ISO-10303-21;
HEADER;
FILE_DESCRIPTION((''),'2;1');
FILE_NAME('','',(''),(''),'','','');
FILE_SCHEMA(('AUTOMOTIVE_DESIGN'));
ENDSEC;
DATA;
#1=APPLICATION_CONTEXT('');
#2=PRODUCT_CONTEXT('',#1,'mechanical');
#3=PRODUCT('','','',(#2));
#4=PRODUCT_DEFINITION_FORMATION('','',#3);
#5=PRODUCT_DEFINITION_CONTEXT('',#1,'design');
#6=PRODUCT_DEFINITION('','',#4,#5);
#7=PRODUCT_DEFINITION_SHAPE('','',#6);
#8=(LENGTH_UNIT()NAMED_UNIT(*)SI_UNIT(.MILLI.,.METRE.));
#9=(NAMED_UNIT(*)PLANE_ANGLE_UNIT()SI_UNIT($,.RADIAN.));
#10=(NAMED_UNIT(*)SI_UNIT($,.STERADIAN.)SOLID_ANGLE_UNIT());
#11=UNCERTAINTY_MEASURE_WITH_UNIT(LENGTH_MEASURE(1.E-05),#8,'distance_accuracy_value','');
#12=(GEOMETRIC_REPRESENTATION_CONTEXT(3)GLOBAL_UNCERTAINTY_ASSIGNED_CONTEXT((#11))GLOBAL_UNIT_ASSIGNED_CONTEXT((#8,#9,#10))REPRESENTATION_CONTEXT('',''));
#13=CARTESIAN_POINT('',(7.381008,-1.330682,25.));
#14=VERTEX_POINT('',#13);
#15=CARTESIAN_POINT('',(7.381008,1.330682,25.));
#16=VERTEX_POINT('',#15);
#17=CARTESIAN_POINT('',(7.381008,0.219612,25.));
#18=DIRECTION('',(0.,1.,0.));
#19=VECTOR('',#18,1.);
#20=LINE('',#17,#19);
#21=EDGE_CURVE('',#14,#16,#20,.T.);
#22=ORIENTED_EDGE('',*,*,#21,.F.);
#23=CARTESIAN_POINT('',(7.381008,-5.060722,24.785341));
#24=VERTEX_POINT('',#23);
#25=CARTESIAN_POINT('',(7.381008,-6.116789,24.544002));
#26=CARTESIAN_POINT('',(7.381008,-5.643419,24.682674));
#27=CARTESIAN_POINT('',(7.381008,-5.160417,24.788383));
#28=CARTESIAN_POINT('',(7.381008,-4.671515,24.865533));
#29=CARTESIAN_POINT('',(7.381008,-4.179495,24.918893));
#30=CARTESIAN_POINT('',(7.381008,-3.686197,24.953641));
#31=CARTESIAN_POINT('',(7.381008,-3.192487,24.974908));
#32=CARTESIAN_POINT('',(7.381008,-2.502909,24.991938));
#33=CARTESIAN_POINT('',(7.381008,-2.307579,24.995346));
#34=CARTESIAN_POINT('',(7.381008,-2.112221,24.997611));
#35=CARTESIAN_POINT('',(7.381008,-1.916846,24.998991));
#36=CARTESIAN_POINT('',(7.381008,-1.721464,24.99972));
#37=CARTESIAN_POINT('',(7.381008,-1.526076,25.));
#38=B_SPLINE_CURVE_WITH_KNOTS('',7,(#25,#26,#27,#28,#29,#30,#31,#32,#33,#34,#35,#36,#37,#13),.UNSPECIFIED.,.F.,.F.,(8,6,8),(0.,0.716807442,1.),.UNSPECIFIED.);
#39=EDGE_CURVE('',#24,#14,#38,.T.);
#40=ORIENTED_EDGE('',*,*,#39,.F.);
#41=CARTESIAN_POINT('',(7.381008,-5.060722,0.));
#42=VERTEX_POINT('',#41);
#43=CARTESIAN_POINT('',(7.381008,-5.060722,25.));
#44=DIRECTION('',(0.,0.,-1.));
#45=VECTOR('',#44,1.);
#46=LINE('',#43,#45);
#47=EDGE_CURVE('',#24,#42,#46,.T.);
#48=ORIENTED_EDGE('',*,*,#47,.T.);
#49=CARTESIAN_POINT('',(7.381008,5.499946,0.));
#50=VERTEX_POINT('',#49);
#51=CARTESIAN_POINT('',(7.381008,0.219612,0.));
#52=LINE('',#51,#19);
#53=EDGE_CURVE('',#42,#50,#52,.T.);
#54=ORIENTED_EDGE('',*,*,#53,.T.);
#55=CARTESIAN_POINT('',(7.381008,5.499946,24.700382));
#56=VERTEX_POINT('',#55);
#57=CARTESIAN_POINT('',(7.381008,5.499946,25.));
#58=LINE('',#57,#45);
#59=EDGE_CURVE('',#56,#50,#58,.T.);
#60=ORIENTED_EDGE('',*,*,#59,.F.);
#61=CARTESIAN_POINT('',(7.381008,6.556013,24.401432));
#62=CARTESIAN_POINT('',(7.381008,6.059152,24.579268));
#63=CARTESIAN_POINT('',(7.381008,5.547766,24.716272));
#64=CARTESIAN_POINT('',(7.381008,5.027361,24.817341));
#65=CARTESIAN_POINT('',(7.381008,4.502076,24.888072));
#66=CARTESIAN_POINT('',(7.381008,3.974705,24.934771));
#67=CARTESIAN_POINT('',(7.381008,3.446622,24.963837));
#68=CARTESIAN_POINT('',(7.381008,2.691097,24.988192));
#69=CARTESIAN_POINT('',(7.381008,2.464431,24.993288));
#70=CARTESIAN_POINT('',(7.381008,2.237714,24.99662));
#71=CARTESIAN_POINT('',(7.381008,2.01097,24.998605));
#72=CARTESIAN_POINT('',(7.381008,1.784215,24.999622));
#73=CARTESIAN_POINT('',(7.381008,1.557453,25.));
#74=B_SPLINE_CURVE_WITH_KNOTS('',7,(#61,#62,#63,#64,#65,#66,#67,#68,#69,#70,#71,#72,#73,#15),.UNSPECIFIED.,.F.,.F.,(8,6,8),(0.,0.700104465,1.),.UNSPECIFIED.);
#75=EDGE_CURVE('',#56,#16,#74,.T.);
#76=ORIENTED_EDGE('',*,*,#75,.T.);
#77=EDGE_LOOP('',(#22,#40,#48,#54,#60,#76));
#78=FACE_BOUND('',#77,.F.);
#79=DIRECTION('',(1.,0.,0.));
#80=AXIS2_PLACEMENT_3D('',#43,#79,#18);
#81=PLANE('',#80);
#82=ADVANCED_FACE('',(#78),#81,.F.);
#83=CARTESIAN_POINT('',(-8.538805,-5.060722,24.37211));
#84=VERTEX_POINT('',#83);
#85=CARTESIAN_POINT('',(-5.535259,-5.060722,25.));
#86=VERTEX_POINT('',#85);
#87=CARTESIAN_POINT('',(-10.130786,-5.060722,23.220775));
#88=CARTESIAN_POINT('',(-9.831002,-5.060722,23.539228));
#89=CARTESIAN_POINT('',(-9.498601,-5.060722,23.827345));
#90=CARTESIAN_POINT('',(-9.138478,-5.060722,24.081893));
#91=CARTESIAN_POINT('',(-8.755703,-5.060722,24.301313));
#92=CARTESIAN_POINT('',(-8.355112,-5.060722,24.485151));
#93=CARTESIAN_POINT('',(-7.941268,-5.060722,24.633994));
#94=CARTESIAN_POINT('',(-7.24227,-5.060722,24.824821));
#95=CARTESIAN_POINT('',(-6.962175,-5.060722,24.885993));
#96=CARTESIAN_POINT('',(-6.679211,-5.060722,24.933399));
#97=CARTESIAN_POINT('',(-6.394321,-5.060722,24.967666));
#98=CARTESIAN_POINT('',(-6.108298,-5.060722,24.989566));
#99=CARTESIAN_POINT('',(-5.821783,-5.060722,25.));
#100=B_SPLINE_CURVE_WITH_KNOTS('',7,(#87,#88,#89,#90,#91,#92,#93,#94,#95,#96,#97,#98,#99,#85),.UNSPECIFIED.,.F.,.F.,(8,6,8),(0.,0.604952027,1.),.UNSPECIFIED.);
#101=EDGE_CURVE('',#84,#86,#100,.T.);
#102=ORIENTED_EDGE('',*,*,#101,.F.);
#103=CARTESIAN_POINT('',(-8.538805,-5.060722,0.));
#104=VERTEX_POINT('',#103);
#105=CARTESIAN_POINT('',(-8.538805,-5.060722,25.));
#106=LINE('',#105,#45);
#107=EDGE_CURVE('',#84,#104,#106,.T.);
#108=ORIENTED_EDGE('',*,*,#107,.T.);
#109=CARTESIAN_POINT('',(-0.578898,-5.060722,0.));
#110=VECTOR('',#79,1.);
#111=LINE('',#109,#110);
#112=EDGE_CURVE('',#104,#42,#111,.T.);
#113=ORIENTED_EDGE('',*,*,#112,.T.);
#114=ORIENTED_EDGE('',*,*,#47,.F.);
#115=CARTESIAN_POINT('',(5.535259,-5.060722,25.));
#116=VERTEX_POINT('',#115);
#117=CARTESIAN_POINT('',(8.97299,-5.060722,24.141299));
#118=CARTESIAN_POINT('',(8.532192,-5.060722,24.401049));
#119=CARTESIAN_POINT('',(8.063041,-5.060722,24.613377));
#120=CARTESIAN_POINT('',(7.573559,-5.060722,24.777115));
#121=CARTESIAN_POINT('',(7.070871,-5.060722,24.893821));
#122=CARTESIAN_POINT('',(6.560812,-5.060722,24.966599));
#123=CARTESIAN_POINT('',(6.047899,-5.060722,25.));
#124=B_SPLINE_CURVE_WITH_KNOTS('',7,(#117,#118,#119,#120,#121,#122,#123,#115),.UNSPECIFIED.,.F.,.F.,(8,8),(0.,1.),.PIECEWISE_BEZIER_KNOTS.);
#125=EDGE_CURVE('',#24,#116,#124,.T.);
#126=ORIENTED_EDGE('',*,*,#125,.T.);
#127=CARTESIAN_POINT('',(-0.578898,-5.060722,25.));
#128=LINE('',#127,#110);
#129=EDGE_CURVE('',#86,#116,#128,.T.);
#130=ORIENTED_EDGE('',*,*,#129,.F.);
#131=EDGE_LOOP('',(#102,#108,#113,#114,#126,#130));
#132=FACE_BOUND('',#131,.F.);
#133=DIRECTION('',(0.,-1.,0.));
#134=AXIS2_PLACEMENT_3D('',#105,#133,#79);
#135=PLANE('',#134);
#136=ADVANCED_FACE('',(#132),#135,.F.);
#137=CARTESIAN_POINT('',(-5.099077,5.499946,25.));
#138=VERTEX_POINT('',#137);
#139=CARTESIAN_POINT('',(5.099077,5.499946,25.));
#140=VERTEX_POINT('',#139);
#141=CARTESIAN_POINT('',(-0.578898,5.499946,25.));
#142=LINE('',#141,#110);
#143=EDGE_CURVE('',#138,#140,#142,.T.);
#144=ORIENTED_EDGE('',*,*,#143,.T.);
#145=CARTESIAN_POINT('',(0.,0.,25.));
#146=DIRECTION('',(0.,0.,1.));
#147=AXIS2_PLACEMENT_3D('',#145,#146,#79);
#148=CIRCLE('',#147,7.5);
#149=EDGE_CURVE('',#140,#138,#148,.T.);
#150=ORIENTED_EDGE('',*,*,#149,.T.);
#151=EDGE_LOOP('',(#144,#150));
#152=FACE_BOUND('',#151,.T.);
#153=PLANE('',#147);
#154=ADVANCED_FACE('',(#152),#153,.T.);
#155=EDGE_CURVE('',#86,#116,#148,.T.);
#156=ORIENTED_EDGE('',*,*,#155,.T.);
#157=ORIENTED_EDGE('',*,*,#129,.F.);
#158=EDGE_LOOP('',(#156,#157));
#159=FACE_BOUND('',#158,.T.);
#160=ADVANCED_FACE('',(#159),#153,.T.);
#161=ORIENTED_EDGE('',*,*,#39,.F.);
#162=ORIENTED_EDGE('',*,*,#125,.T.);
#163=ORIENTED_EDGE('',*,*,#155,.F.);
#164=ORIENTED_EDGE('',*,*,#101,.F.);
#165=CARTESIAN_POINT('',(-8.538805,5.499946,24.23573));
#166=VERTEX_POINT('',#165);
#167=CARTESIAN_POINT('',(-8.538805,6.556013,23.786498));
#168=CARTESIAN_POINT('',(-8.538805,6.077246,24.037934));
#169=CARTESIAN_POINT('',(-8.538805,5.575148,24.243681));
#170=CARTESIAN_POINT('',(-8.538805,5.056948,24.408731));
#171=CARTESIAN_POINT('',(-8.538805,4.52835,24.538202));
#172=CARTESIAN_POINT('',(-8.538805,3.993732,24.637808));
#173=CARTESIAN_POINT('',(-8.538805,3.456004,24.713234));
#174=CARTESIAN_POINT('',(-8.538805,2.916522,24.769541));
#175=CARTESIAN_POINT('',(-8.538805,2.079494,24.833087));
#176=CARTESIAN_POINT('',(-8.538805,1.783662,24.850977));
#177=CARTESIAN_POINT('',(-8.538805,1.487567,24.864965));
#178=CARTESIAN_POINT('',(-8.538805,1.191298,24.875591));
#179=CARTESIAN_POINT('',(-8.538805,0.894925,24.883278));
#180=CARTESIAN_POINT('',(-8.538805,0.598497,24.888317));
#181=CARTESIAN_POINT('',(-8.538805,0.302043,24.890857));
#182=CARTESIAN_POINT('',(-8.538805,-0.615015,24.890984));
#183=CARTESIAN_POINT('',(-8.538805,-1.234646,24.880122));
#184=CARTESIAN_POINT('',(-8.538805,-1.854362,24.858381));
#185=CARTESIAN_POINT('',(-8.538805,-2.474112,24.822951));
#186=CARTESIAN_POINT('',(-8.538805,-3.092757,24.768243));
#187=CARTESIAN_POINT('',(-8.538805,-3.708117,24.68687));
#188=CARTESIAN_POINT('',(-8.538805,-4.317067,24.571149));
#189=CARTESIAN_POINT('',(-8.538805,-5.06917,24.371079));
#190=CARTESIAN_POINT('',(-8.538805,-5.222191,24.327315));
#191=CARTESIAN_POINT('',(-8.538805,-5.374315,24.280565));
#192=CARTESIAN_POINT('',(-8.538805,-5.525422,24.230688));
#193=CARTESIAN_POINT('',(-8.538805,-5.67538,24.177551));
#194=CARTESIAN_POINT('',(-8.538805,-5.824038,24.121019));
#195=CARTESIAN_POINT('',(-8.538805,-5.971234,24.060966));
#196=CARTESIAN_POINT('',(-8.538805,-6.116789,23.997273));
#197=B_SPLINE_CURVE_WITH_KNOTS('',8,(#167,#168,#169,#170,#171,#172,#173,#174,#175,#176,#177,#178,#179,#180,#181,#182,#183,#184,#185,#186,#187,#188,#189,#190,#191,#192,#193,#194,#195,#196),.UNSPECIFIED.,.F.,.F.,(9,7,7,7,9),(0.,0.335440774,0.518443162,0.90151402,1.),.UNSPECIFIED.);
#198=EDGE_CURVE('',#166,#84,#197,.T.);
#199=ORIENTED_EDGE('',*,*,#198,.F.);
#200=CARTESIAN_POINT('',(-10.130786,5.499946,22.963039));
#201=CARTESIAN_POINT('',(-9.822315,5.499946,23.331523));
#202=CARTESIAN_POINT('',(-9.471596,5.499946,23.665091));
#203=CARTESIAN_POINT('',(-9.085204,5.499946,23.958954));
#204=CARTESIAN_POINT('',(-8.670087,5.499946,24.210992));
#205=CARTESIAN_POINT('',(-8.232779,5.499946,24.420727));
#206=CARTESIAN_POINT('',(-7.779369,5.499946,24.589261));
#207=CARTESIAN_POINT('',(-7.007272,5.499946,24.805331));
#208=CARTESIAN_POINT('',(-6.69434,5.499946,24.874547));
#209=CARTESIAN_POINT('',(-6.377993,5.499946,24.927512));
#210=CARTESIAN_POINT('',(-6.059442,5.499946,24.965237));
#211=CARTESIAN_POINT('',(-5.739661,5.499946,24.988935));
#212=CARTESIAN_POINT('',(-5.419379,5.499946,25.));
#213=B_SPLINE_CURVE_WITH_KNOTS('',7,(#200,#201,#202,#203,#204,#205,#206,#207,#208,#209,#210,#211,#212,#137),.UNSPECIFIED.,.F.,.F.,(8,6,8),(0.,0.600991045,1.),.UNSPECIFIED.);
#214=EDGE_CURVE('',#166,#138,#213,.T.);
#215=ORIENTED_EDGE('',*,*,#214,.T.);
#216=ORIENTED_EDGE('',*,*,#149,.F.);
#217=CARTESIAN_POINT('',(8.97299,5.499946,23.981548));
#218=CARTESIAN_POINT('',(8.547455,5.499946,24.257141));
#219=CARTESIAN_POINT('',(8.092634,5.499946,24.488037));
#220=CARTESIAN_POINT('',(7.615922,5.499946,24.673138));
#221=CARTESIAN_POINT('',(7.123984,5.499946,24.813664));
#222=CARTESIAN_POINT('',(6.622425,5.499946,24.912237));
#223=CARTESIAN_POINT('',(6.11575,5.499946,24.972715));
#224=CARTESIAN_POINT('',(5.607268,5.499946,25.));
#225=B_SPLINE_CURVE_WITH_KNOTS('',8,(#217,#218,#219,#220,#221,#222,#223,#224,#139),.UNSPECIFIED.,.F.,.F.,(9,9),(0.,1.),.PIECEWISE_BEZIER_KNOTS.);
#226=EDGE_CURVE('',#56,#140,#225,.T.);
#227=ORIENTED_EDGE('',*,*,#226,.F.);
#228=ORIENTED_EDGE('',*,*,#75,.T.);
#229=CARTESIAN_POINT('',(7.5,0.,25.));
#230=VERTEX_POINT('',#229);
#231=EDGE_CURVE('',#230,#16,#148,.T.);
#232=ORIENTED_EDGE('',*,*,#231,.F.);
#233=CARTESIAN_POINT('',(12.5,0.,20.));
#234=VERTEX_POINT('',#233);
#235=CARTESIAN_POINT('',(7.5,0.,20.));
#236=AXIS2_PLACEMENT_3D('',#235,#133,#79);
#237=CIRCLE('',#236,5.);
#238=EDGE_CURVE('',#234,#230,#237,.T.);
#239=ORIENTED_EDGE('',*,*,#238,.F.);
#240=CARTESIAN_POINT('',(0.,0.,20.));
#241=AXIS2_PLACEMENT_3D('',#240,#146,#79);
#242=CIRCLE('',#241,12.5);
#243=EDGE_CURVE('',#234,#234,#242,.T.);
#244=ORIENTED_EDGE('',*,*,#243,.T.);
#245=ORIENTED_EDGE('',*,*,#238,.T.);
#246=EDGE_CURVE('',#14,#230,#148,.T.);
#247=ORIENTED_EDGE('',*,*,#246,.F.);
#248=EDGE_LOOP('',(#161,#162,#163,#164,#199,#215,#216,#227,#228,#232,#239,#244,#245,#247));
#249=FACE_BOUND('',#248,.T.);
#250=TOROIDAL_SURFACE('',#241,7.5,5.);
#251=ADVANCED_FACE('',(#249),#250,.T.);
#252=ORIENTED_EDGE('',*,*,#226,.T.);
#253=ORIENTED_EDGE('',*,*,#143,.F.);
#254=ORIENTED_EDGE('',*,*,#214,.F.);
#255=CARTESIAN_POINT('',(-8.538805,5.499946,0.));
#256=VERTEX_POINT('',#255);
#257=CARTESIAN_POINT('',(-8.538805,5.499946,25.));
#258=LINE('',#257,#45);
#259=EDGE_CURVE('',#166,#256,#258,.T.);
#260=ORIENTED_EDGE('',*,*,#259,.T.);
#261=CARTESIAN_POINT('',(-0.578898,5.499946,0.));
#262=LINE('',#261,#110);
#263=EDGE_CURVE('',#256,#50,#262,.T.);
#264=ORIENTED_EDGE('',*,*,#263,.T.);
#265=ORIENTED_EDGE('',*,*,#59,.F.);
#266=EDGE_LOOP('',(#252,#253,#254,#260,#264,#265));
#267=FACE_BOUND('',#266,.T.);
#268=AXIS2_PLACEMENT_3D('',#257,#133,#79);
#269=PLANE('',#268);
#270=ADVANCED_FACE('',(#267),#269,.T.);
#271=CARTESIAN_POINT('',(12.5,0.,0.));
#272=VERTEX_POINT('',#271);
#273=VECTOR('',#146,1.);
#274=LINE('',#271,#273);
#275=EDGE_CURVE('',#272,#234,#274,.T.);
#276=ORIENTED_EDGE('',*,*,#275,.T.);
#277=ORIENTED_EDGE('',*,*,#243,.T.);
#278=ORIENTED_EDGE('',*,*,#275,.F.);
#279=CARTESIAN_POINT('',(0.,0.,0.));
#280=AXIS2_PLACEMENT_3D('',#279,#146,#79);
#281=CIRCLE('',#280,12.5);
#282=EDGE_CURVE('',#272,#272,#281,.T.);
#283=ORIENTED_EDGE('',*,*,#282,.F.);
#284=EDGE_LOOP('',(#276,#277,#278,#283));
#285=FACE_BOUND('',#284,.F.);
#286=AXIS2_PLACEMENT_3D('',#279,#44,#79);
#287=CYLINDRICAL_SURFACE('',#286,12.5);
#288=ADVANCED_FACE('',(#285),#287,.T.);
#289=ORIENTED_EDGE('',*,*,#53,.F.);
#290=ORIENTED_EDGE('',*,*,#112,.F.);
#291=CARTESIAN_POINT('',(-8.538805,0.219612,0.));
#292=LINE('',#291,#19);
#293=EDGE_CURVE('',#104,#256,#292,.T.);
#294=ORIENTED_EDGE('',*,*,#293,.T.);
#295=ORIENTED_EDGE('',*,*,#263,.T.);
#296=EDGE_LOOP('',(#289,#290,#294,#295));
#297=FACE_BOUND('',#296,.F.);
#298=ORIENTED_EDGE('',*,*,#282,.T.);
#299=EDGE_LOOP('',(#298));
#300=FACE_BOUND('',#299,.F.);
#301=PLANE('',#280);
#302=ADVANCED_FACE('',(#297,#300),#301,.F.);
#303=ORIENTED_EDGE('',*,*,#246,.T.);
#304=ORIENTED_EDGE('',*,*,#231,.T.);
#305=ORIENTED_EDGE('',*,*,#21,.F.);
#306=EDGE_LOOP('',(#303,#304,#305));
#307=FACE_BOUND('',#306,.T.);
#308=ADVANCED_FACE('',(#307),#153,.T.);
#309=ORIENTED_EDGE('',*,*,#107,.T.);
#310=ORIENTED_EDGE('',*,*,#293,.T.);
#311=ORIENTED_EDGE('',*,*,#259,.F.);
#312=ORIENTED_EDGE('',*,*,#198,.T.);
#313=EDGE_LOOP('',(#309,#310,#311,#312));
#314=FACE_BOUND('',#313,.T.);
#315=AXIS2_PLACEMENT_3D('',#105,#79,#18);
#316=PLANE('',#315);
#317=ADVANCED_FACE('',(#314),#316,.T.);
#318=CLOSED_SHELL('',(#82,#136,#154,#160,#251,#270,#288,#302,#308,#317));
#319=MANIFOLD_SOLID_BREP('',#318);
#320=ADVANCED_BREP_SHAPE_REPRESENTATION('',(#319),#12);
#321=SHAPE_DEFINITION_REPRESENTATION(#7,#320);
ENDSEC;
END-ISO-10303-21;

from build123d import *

# Parameters (mm, degrees)
F0_R     = 12.5
F1_DEPTH = 25
F2_W     = 15.9198134206
F2_H     = 10.5606685393
F3_DEPTH = 25


# Not quite as in the source:
# - a fillet or chamfer that OpenCascade refuses, or shapes differently, is made with other operations: its cross-section is extruded or revolved along the edge and cut away or added


with BuildPart() as f1:
    # F0 (on Top) → F1 (new body)
    with BuildSketch(Plane.XY):
        Circle(F0_R)
    extrude(amount=F1_DEPTH)

    # F2 (on face) → F3 (cut)
    with BuildSketch(Plane.XY.offset(25)):
        with Locations((-0.578898238, 0.2196121495)):
            Rectangle(F2_W, F2_H)
    extrude(amount=-F3_DEPTH, mode=Mode.SUBTRACT)

    # F4: fillet of radius 5 on 1 edges, made by hand

    # F4_s1 → F4_t2 (revolve, cut)
    with BuildSketch(Plane.XZ):
        with BuildLine():
            ThreePointArc((12.5, 20), (11.0355339059, 23.5355339059), (7.5, 25))
            Line((7.5, 25), (12.5, 25))
            Line((12.5, 25), (12.5, 20))
        make_face()
    revolve(axis=Axis((0, 0, 25), (0, 0, 1)), mode=Mode.SUBTRACT)


solid = f1.part
